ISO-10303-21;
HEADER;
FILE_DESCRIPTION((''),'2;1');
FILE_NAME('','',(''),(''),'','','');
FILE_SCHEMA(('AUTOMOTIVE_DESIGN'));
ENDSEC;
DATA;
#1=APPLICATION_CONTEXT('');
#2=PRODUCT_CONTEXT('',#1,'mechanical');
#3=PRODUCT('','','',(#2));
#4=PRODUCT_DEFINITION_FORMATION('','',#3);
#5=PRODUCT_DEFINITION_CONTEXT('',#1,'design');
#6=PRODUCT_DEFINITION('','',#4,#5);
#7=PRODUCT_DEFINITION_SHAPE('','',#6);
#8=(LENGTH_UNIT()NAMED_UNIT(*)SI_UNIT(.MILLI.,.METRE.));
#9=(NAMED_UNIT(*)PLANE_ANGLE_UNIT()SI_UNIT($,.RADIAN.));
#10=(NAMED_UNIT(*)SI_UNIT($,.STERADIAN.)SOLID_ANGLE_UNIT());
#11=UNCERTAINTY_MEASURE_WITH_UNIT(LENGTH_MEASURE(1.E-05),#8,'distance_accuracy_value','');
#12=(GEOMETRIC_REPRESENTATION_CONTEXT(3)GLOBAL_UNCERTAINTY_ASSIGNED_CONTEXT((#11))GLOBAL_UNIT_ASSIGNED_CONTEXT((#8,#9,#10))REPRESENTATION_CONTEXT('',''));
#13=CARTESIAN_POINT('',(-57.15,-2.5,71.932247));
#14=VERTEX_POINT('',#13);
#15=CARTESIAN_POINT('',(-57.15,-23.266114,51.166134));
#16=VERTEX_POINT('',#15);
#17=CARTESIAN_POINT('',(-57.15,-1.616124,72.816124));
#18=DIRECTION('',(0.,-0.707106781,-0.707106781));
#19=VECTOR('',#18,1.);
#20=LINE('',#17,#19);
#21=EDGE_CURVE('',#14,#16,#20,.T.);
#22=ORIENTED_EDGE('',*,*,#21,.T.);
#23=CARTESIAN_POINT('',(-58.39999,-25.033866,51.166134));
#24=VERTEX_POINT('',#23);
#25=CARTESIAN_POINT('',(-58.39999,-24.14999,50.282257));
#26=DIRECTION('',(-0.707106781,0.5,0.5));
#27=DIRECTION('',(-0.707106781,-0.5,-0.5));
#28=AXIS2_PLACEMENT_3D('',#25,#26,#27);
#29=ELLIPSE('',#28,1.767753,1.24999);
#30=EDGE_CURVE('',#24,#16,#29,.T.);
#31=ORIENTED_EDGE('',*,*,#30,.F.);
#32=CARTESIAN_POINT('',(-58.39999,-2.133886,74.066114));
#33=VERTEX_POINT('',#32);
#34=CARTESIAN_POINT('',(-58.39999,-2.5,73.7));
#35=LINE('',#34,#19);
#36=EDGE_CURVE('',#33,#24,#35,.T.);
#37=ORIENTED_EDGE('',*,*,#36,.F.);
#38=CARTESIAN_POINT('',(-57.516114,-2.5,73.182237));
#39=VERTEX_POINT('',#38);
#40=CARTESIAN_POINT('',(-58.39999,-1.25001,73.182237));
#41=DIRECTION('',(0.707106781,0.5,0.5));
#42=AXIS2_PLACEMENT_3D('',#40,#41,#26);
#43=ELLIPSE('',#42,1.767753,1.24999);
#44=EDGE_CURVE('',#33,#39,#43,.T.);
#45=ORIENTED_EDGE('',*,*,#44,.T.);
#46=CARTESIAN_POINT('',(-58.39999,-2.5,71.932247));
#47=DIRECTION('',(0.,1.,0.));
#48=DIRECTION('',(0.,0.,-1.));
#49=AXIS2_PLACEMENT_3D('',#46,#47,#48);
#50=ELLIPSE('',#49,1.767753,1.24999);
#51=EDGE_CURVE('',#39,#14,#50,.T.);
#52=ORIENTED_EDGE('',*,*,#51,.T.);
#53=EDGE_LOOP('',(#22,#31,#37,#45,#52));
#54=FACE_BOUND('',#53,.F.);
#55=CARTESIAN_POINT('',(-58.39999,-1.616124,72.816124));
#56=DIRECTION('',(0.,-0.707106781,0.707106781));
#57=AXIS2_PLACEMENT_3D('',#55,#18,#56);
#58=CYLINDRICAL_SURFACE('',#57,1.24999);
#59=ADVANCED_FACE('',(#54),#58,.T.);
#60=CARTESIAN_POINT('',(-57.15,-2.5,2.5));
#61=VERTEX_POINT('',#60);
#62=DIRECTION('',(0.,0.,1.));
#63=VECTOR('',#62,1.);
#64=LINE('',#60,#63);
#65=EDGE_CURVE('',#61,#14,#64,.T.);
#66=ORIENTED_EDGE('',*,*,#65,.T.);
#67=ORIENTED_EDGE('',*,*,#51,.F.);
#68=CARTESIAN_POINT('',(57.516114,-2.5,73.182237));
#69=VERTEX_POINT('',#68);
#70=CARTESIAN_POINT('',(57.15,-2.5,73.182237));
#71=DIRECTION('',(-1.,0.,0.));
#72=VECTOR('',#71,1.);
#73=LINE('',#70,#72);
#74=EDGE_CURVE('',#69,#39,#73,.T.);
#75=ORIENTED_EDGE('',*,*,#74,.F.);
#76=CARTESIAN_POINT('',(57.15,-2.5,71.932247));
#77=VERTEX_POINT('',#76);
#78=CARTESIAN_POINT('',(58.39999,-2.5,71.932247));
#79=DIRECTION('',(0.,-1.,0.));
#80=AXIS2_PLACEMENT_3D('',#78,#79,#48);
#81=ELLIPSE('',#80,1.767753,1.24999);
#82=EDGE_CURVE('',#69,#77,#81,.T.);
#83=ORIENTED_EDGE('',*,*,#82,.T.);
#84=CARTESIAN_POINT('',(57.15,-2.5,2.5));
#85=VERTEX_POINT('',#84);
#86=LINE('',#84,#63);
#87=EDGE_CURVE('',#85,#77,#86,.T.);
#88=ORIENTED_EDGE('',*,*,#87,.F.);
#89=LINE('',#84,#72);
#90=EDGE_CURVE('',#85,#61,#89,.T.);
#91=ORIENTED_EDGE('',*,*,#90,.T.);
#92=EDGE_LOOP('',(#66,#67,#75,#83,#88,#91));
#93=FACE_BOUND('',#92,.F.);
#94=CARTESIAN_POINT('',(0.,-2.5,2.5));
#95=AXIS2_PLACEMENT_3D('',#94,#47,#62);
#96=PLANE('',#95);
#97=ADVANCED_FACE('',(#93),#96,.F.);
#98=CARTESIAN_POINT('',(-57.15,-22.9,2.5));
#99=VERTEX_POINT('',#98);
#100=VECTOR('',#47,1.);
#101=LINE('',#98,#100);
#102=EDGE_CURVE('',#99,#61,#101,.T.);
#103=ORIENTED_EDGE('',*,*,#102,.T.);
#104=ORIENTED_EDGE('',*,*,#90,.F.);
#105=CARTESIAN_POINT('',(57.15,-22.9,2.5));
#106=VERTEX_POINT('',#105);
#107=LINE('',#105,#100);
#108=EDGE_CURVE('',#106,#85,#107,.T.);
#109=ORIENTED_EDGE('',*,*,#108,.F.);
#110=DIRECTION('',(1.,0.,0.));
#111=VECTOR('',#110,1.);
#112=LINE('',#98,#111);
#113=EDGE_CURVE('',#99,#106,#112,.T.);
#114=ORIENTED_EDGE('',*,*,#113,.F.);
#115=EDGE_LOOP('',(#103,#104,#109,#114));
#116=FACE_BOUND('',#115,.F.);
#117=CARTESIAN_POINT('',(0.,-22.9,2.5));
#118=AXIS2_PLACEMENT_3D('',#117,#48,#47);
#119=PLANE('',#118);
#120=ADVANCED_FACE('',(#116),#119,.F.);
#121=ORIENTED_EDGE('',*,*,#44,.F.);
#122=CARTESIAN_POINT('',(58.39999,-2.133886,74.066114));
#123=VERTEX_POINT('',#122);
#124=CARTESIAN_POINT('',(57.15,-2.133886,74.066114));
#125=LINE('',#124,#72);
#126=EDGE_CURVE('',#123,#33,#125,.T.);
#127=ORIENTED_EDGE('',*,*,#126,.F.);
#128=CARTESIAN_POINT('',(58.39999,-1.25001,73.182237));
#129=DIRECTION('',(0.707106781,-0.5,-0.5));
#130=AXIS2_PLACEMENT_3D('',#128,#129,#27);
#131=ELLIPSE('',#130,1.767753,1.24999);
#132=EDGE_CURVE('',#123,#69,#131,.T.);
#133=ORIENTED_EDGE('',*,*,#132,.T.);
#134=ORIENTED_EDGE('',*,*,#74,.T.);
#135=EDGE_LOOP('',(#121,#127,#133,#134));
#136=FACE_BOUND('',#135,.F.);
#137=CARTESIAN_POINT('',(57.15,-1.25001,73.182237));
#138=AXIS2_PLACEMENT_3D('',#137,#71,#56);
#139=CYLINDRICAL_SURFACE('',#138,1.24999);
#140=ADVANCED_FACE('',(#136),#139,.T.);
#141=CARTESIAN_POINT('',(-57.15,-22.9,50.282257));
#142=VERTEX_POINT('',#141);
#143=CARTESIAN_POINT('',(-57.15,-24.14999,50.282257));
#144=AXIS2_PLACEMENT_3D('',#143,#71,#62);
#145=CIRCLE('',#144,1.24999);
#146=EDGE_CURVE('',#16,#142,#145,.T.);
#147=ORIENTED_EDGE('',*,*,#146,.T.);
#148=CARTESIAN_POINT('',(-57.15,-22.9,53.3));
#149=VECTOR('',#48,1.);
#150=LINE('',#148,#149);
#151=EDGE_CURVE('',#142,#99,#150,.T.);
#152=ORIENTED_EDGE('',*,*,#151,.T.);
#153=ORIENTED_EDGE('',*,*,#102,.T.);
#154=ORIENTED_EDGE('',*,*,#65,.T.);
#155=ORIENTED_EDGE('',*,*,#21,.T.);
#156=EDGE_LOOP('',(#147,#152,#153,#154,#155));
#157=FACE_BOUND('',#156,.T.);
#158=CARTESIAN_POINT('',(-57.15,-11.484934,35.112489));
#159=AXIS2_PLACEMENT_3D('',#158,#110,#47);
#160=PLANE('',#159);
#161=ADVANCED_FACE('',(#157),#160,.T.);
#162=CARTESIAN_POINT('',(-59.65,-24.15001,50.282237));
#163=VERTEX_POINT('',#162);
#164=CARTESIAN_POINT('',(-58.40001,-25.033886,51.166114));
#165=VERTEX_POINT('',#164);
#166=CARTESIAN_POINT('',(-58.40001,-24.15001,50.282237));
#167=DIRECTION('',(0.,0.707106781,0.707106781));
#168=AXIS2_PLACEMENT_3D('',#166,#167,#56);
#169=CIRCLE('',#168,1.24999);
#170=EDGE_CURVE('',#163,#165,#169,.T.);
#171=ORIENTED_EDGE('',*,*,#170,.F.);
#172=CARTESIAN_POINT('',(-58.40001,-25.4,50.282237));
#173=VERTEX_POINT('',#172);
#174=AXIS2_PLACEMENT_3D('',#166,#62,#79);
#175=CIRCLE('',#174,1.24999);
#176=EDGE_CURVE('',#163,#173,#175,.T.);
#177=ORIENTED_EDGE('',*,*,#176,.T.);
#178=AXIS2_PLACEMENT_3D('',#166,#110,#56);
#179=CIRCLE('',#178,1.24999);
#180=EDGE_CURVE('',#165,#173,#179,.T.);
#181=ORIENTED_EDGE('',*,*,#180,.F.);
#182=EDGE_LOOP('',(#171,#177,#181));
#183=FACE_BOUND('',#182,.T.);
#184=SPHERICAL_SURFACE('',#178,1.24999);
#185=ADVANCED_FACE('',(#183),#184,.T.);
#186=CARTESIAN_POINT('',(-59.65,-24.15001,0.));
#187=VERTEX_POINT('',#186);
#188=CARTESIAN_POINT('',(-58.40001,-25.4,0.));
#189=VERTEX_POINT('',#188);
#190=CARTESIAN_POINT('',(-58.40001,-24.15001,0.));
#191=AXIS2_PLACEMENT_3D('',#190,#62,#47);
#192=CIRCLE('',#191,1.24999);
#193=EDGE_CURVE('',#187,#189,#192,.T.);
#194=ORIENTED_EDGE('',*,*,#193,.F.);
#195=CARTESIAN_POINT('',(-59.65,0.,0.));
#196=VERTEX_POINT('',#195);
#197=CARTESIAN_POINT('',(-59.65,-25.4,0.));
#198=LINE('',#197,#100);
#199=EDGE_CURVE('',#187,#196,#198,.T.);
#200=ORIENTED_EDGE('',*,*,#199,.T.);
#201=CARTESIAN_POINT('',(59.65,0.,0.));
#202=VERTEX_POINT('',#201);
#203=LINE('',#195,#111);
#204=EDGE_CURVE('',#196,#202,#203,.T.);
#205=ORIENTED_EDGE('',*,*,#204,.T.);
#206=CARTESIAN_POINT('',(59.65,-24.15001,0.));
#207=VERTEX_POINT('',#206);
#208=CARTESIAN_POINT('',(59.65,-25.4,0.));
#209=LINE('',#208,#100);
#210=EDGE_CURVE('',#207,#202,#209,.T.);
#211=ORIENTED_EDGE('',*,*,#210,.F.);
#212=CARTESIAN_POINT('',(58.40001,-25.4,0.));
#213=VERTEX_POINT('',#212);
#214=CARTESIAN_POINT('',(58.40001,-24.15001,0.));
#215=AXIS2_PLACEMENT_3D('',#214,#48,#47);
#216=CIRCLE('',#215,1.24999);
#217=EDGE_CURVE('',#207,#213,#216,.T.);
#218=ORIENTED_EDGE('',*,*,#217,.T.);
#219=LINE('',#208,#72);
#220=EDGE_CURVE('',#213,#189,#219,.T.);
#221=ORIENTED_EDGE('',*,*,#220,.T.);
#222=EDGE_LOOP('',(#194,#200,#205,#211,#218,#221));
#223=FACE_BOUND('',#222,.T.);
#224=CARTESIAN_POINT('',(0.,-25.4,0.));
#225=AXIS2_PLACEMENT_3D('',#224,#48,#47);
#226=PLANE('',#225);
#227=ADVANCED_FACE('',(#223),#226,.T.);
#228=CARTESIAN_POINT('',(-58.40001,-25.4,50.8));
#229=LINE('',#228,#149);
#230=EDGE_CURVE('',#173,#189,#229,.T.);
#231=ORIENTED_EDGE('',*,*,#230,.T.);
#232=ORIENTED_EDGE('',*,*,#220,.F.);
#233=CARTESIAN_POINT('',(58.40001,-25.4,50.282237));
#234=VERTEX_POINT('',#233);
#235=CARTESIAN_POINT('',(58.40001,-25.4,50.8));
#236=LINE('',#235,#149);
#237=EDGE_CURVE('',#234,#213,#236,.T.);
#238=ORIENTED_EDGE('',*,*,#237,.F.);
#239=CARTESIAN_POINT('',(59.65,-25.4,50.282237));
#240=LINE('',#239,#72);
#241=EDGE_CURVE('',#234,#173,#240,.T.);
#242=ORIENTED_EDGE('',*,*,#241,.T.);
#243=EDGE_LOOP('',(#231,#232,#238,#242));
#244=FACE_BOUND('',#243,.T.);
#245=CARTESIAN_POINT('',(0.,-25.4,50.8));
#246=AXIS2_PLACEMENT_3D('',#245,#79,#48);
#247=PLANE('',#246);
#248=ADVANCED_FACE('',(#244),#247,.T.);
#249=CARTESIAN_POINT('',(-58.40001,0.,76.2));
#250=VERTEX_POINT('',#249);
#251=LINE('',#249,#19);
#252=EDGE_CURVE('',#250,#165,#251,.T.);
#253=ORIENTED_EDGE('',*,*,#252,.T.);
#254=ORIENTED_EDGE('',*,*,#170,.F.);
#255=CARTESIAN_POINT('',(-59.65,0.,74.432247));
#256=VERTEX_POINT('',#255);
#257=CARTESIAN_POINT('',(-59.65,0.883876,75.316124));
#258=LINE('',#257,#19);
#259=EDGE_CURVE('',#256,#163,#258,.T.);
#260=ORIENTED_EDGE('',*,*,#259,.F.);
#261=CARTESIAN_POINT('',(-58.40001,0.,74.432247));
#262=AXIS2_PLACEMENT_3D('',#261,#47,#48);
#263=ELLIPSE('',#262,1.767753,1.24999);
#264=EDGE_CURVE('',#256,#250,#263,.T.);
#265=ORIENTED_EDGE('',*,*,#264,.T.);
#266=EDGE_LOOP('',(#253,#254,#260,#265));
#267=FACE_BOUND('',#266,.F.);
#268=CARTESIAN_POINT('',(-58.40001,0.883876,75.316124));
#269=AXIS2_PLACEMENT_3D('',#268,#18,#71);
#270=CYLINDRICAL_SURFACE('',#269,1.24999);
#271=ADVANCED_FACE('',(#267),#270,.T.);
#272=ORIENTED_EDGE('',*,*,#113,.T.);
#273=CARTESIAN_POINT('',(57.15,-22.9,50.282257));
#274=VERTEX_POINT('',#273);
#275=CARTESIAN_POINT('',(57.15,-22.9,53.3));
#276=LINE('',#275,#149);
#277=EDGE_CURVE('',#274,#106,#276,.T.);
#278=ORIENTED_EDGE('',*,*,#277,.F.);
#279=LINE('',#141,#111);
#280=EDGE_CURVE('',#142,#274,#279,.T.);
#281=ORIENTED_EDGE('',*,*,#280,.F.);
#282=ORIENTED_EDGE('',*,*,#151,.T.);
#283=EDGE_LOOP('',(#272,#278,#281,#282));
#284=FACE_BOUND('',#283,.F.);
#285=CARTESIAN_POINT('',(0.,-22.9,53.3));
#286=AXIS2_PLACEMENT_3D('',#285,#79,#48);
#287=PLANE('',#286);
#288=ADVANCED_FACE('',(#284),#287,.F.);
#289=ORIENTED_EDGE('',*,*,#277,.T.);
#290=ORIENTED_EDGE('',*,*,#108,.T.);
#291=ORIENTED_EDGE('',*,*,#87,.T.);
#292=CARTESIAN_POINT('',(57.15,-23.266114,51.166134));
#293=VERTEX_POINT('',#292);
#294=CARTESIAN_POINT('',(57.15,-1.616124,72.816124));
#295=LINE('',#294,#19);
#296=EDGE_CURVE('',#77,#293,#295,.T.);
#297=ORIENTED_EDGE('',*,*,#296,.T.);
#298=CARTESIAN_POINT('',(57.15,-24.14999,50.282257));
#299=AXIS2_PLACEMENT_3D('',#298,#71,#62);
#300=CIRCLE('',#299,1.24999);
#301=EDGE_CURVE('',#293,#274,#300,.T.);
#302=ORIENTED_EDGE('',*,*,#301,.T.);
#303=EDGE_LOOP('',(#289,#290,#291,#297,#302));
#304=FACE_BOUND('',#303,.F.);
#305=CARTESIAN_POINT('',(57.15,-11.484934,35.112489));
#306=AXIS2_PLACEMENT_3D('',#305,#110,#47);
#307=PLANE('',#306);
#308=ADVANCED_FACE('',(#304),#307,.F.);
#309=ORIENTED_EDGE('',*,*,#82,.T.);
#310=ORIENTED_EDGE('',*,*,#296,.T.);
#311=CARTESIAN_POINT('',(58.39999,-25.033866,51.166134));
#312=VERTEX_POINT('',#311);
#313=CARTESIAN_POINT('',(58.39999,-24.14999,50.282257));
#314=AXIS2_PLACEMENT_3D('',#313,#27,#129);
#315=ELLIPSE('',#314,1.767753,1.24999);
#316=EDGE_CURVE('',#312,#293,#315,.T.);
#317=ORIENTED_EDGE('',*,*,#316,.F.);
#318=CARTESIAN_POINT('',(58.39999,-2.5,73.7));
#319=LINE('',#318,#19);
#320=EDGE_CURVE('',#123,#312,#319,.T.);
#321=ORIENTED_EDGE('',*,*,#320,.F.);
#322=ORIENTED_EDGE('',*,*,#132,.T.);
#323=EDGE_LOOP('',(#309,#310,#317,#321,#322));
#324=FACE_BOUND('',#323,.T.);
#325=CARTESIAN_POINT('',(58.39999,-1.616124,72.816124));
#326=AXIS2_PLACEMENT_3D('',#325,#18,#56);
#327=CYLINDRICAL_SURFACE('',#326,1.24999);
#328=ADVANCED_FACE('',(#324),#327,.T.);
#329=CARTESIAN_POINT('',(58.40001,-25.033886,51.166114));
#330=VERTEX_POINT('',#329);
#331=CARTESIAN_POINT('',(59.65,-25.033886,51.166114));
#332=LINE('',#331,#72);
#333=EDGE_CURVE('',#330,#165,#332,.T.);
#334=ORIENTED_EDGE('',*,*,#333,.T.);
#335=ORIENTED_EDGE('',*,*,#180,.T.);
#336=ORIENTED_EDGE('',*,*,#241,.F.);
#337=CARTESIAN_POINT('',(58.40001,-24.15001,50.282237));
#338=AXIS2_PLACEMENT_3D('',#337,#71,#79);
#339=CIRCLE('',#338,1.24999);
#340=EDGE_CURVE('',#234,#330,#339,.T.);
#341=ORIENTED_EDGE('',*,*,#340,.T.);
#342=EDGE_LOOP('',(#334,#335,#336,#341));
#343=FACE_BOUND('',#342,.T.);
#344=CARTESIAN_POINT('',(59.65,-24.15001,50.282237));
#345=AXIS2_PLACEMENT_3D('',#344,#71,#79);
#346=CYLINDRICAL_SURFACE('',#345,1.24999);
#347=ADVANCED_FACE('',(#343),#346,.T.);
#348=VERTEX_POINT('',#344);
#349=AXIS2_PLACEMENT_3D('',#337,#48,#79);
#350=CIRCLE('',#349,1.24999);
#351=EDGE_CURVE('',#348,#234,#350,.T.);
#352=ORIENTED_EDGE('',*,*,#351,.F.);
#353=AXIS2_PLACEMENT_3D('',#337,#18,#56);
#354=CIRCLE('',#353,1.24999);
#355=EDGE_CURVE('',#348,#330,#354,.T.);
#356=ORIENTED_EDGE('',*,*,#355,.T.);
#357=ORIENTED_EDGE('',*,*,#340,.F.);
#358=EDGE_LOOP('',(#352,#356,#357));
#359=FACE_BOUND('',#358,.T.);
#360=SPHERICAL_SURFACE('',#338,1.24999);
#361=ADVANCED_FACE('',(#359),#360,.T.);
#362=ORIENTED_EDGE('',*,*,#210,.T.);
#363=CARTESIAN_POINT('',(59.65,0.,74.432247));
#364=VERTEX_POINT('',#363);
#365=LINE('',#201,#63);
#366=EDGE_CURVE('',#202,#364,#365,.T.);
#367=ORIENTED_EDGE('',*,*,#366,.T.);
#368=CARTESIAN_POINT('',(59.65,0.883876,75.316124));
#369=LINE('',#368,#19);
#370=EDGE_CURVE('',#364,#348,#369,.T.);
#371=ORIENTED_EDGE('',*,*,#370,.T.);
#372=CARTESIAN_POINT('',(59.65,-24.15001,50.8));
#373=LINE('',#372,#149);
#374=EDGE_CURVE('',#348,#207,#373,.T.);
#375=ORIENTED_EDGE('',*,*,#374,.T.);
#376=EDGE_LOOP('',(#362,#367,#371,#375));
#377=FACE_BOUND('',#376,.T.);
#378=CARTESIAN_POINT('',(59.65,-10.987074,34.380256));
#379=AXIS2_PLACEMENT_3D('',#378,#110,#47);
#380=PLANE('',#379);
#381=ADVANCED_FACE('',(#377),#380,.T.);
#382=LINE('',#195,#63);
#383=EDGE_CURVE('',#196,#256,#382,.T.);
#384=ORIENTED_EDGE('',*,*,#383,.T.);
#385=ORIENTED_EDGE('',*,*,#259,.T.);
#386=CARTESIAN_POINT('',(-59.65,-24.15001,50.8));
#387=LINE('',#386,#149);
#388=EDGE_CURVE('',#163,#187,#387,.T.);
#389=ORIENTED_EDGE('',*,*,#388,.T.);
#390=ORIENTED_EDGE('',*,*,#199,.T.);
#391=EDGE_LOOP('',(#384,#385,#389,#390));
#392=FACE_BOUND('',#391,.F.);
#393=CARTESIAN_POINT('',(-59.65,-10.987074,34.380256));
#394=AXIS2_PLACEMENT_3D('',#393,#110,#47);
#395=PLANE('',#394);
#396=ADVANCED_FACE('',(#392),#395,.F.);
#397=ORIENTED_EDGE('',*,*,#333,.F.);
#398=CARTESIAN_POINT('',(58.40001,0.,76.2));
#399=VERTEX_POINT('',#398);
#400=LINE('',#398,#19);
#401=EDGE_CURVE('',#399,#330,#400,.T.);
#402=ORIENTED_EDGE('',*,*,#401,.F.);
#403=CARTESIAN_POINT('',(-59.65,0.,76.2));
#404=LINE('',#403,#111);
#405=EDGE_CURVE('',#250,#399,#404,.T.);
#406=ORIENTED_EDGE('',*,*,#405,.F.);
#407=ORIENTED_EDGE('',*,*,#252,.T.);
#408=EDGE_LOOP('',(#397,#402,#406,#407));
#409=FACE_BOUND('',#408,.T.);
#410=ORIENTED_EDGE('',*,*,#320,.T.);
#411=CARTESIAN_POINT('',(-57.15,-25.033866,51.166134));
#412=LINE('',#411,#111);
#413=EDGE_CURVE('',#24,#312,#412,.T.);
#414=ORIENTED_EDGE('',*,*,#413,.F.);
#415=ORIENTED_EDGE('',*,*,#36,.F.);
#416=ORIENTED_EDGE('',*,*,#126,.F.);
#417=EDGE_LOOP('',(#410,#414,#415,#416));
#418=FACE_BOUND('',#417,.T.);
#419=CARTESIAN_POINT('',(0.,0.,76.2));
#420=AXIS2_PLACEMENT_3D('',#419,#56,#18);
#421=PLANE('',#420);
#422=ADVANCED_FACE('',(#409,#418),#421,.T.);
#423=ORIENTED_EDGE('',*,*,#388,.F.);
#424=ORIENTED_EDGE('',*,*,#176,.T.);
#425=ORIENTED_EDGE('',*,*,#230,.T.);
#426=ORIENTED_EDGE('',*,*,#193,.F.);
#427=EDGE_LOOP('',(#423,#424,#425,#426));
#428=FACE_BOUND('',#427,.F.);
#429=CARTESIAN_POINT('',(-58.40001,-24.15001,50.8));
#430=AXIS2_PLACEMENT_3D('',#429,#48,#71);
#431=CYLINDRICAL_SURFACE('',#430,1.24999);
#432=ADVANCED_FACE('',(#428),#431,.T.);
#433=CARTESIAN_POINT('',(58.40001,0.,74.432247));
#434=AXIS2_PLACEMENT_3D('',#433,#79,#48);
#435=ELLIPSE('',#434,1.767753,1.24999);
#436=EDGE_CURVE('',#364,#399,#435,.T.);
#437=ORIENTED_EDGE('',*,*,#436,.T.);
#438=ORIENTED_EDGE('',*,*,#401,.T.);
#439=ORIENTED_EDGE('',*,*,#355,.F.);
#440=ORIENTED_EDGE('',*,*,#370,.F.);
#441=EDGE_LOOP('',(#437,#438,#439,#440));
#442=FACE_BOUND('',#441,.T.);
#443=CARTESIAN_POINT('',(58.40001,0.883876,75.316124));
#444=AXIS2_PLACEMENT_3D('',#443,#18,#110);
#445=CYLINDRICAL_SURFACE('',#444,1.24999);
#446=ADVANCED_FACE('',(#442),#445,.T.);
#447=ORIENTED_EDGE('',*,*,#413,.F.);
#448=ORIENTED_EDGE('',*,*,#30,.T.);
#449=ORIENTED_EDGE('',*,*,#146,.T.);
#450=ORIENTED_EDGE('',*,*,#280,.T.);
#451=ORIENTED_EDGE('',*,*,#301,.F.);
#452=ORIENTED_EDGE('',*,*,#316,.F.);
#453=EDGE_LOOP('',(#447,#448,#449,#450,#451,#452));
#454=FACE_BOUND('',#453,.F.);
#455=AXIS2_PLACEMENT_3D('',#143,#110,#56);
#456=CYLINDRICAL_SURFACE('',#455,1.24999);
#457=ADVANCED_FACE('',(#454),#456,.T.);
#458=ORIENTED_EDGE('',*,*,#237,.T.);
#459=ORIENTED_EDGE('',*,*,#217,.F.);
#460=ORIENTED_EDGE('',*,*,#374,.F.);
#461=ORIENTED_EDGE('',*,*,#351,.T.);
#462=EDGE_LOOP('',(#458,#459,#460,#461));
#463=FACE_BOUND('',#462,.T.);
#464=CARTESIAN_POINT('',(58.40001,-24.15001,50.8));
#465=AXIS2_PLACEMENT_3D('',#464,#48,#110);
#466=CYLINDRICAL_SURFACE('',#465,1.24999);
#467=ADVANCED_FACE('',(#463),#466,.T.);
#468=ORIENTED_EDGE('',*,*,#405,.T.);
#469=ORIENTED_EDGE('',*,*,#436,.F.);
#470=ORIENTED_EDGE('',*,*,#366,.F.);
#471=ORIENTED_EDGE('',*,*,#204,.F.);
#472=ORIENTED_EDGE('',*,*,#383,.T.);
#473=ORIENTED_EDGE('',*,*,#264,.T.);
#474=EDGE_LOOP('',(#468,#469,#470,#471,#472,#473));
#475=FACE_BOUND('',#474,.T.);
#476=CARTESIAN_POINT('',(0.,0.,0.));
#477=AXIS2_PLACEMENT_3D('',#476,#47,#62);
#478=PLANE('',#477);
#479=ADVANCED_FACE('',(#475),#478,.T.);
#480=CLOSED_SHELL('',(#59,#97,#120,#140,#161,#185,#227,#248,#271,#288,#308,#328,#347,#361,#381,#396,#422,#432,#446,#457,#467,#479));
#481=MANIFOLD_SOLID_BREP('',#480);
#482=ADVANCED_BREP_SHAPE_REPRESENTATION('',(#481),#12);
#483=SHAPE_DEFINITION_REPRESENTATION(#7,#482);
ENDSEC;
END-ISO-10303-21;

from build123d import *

# Parameters (mm, degrees)
F1_DEPTH = 59.65
F3_DEPTH = 57.15
F4_R     = 1.24999


# Not quite as in the source:
# - a fillet or chamfer is up to 0.001 mm smaller than in the source, because OpenCascade refuses the exact size


with BuildPart() as f1:
    # F0 (on Right) → F1 (new body, symmetric)
    with BuildSketch(Plane.YZ):
        Polygon((-25.4, 0), (0, 0), (0, 76.2), (-25.4, 50.8), align=None)
    extrude(amount=F1_DEPTH, both=True)

    # F2 (on Right) → F3 (cut, symmetric)
    with BuildSketch(Plane.YZ):
        Polygon((-2.5, 73.7), (-22.9, 53.3), (-22.9, 2.5), (-2.5, 2.5), align=None)
    extrude(amount=F3_DEPTH, both=True, mode=Mode.SUBTRACT)

    # F4 (radius 1.25 in the source; OpenCascade refuses exactly that, so slightly less here)
    f4_edges = [f1.edges().sort_by_distance(p)[0] for p in [
        (-59.65, -25.4, 25.4),
        (59.65, -25.4, 25.4),
        (59.65, -12.7, 63.5),
        (0, -25.4, 50.8),
        (-59.65, -12.7, 63.5),
        (57.15, -12.7, 63.5),
        (0, -22.9, 53.3),
        (0, -2.5, 73.7),
        (-57.15, -12.7, 63.5),
    ]]
    fillet(f4_edges, radius=F4_R)


solid = f1.part
